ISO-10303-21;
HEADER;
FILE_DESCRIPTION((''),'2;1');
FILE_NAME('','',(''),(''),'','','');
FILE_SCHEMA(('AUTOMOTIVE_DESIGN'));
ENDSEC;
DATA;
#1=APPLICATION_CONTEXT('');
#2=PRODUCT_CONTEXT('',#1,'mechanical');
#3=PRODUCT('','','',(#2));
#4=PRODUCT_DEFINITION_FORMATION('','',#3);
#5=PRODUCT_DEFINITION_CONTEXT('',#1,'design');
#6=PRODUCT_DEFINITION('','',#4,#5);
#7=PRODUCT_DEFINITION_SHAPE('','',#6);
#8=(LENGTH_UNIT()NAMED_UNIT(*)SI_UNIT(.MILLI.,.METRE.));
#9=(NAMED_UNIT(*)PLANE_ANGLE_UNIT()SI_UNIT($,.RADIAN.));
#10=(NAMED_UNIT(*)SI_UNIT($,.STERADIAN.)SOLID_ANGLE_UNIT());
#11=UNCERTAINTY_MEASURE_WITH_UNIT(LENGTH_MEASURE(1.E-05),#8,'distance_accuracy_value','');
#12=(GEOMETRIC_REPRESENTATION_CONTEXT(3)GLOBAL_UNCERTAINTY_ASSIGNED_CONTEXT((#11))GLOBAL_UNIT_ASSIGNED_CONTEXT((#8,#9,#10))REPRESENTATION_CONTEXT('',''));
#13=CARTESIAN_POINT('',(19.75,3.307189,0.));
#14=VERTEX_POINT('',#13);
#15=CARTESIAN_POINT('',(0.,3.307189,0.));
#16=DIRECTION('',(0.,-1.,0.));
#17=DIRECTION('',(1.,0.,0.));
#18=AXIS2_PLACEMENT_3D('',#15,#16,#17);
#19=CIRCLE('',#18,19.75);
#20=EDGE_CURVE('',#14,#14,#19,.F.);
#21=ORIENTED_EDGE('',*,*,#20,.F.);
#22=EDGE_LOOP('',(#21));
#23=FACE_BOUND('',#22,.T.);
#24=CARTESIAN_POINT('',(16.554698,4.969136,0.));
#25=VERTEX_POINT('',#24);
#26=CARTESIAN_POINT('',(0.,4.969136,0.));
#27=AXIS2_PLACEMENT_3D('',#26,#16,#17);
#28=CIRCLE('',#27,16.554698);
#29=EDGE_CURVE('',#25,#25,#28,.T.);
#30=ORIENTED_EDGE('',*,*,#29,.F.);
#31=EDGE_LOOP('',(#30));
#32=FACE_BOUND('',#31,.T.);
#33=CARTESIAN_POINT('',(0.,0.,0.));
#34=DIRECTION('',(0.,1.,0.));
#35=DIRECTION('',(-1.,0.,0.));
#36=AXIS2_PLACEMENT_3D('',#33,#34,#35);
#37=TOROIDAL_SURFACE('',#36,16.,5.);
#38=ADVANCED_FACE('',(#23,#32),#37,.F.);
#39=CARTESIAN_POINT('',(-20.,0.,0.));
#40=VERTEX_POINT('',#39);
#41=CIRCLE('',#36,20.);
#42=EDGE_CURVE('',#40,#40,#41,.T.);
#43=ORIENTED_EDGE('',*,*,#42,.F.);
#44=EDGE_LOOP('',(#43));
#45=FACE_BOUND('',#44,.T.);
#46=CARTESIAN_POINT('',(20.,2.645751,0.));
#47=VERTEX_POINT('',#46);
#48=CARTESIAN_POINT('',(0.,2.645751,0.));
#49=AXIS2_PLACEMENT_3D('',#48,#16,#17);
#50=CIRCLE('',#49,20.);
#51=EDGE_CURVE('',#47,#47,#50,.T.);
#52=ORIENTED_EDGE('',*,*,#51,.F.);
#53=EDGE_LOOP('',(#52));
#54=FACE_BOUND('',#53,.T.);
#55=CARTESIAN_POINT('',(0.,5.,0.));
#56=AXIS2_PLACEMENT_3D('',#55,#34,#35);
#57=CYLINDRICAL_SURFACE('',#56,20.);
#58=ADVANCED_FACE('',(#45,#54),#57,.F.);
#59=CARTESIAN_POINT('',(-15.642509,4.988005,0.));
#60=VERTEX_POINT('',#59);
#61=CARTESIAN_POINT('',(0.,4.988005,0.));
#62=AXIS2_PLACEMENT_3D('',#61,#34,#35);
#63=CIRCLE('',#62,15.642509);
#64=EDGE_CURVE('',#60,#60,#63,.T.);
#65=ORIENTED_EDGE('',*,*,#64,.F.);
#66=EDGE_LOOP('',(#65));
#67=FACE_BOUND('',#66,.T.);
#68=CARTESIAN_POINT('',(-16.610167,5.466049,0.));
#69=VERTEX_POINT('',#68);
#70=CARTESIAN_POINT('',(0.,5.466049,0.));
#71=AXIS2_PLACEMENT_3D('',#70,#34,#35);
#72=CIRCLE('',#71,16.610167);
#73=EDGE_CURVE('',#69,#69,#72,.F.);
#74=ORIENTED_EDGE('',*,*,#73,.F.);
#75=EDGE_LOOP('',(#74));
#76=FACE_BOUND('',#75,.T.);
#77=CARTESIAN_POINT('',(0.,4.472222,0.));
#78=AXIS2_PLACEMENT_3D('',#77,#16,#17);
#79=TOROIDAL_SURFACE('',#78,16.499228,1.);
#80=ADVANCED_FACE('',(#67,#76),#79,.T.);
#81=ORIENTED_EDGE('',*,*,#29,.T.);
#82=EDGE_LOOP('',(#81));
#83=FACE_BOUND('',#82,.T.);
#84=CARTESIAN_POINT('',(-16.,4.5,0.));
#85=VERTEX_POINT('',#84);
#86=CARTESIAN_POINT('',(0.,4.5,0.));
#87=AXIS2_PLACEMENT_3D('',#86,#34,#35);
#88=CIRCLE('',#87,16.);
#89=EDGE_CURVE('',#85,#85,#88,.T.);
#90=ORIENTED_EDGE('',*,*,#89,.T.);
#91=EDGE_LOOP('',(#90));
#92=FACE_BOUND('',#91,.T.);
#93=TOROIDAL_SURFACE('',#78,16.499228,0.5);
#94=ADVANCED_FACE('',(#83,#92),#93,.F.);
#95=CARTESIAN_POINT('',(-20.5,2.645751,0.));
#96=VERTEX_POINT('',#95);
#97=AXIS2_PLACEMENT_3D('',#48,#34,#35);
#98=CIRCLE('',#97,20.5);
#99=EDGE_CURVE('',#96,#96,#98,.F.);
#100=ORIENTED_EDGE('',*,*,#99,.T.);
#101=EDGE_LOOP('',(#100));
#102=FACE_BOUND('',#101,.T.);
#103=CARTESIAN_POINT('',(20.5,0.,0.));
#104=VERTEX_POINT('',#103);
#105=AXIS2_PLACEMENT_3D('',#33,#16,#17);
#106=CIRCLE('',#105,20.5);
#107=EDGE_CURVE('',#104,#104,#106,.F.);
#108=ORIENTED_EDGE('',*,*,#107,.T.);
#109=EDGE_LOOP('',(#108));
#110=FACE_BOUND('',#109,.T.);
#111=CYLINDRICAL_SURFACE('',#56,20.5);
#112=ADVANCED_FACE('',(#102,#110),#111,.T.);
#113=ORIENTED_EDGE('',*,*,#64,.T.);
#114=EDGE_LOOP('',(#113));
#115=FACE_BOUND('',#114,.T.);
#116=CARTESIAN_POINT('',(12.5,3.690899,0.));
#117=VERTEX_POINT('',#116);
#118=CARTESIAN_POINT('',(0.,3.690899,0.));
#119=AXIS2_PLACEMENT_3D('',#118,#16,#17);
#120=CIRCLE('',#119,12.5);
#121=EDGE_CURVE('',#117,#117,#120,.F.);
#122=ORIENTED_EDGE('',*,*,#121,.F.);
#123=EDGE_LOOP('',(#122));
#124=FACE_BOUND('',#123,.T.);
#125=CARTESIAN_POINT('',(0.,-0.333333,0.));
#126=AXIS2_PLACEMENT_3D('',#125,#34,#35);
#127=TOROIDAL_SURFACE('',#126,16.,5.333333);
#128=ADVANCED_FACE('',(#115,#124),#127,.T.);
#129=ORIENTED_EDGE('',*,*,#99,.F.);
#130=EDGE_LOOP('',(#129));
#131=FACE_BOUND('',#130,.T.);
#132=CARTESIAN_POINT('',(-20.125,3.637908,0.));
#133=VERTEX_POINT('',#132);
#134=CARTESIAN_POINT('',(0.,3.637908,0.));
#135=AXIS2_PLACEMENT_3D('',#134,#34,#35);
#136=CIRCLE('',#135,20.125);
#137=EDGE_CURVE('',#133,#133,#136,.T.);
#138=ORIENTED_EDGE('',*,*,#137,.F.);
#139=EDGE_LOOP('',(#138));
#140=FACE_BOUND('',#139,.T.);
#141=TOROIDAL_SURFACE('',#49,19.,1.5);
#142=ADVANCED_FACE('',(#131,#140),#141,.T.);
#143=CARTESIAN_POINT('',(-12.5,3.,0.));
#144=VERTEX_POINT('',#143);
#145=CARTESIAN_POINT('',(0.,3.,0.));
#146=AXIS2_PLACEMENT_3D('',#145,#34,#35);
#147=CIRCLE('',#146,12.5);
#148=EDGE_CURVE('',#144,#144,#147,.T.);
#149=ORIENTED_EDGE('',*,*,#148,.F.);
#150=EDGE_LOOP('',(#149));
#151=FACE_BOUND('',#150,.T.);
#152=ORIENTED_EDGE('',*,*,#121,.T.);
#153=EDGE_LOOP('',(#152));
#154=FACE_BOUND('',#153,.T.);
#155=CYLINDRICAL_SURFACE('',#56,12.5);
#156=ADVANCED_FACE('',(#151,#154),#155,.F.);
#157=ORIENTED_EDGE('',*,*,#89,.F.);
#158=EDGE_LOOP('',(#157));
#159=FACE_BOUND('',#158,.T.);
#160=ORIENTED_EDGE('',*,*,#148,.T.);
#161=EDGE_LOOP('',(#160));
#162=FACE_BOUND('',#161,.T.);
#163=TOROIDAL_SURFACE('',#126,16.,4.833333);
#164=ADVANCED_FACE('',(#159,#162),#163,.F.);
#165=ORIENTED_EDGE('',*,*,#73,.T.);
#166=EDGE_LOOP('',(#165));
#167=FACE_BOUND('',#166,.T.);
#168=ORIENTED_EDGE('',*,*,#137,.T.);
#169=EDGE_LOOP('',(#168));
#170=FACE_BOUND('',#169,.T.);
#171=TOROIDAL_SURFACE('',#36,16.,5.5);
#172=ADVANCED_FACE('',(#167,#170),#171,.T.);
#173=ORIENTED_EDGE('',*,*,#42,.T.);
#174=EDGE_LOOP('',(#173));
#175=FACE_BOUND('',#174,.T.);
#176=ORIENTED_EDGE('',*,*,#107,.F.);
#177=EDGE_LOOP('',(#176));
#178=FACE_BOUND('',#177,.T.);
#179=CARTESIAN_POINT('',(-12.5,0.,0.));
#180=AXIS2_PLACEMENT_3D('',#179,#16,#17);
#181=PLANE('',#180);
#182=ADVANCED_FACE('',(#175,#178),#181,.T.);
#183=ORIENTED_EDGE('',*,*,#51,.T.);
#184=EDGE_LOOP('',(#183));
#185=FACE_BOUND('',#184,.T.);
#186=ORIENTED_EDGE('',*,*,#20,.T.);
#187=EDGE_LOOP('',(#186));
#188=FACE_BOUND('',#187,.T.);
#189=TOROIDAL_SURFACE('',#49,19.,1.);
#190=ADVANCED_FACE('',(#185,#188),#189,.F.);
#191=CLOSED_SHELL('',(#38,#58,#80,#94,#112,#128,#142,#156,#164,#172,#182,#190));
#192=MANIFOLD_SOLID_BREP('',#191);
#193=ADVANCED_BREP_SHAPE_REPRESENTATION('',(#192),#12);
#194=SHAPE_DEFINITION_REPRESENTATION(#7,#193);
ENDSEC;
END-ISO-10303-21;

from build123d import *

# Parameters (mm, degrees)
FILLET_1_R = 1
FILLET_2_R = 0.5
SHELL_1_T  = 0.5


with BuildPart() as part:
    # Эскиз1 → Повернуть1 (revolve)
    with BuildSketch(Plane.XY):
        with BuildLine():
            Line((-20, -2.45e-15), (-20, 2.9999999999999973))
            ThreePointArc((-20, 2.9999999999999973), (-18.23606797749979, 4.47213595499958), (-16, 5.000000000000001))
            Line((-16, 5.000000000000001), (-16, 4.500000000000001))
            ThreePointArc((-16, 4.500000000000001), (-14.096056723534023, 4.1092009784206125), (-12.5, 2.9999999999999973))
            Line((-12.5, 2.9999999999999973), (-12.5, -1.53e-15))
            Line((-12.5, -1.53e-15), (-20, -2.45e-15))
        make_face()
    revolve(axis=Axis((8.7e-16, 5, 0), (-1.7e-16, -1, 0)))

    # Скругление1
    fillet_1_edges = [part.edges().sort_by_distance(p)[0] for p in [
        (20, 2.99999999999999, -2.45e-15),
    ]]
    fillet(fillet_1_edges, radius=FILLET_1_R)

    # Скругление2
    # the kernel refuses this fillet: 0.5 mm, written as the material it takes off along each edge
    with BuildSketch(Plane(origin=(8.7e-16, 4.999999999999999, 0), x_dir=(-1, 1.7e-16, 0), z_dir=(0, 0, 1))) as fillet_2_piece_1:
        with BuildLine():
            CenterArc((16.499227798766984, 0.5277777777777778), FILLET_2_R, 183.1847385367202, 93.18473853672054)
            Line((16, 0.5000000000000018), (15.99001544402466, 0.49944444444444613))
            ThreePointArc((15.99001544402466, 0.49944444444444613), (15.99, 0.2500000000000009), (15.99, 0))
            Line((15.99, 0), (16, -0.00999999999999979))
            ThreePointArc((16, -0.00999999999999979), (16.278333333333332, -0.00226254364518126), (16.55580694929391, 0.02092592592592544))
            Line((16.55580694929391, 0.02092592592592544), (16.554697554185537, 0.03086419753086398))
        make_face()
    revolve(axis=Axis((8.7e-16, 4.999999999999999, 0), (-1.7e-16, -1, 0)), mode=Mode.SUBTRACT)

    # Оболочка1
    shell_1_openings = [part.faces().sort_by_distance(p)[0] for p in [
        (13.065685425, 0, 0),
        (12.5, 1.5, 0),
    ]]
    offset(amount=SHELL_1_T, openings=shell_1_openings, kind=Kind.INTERSECTION)


solid = part.part
